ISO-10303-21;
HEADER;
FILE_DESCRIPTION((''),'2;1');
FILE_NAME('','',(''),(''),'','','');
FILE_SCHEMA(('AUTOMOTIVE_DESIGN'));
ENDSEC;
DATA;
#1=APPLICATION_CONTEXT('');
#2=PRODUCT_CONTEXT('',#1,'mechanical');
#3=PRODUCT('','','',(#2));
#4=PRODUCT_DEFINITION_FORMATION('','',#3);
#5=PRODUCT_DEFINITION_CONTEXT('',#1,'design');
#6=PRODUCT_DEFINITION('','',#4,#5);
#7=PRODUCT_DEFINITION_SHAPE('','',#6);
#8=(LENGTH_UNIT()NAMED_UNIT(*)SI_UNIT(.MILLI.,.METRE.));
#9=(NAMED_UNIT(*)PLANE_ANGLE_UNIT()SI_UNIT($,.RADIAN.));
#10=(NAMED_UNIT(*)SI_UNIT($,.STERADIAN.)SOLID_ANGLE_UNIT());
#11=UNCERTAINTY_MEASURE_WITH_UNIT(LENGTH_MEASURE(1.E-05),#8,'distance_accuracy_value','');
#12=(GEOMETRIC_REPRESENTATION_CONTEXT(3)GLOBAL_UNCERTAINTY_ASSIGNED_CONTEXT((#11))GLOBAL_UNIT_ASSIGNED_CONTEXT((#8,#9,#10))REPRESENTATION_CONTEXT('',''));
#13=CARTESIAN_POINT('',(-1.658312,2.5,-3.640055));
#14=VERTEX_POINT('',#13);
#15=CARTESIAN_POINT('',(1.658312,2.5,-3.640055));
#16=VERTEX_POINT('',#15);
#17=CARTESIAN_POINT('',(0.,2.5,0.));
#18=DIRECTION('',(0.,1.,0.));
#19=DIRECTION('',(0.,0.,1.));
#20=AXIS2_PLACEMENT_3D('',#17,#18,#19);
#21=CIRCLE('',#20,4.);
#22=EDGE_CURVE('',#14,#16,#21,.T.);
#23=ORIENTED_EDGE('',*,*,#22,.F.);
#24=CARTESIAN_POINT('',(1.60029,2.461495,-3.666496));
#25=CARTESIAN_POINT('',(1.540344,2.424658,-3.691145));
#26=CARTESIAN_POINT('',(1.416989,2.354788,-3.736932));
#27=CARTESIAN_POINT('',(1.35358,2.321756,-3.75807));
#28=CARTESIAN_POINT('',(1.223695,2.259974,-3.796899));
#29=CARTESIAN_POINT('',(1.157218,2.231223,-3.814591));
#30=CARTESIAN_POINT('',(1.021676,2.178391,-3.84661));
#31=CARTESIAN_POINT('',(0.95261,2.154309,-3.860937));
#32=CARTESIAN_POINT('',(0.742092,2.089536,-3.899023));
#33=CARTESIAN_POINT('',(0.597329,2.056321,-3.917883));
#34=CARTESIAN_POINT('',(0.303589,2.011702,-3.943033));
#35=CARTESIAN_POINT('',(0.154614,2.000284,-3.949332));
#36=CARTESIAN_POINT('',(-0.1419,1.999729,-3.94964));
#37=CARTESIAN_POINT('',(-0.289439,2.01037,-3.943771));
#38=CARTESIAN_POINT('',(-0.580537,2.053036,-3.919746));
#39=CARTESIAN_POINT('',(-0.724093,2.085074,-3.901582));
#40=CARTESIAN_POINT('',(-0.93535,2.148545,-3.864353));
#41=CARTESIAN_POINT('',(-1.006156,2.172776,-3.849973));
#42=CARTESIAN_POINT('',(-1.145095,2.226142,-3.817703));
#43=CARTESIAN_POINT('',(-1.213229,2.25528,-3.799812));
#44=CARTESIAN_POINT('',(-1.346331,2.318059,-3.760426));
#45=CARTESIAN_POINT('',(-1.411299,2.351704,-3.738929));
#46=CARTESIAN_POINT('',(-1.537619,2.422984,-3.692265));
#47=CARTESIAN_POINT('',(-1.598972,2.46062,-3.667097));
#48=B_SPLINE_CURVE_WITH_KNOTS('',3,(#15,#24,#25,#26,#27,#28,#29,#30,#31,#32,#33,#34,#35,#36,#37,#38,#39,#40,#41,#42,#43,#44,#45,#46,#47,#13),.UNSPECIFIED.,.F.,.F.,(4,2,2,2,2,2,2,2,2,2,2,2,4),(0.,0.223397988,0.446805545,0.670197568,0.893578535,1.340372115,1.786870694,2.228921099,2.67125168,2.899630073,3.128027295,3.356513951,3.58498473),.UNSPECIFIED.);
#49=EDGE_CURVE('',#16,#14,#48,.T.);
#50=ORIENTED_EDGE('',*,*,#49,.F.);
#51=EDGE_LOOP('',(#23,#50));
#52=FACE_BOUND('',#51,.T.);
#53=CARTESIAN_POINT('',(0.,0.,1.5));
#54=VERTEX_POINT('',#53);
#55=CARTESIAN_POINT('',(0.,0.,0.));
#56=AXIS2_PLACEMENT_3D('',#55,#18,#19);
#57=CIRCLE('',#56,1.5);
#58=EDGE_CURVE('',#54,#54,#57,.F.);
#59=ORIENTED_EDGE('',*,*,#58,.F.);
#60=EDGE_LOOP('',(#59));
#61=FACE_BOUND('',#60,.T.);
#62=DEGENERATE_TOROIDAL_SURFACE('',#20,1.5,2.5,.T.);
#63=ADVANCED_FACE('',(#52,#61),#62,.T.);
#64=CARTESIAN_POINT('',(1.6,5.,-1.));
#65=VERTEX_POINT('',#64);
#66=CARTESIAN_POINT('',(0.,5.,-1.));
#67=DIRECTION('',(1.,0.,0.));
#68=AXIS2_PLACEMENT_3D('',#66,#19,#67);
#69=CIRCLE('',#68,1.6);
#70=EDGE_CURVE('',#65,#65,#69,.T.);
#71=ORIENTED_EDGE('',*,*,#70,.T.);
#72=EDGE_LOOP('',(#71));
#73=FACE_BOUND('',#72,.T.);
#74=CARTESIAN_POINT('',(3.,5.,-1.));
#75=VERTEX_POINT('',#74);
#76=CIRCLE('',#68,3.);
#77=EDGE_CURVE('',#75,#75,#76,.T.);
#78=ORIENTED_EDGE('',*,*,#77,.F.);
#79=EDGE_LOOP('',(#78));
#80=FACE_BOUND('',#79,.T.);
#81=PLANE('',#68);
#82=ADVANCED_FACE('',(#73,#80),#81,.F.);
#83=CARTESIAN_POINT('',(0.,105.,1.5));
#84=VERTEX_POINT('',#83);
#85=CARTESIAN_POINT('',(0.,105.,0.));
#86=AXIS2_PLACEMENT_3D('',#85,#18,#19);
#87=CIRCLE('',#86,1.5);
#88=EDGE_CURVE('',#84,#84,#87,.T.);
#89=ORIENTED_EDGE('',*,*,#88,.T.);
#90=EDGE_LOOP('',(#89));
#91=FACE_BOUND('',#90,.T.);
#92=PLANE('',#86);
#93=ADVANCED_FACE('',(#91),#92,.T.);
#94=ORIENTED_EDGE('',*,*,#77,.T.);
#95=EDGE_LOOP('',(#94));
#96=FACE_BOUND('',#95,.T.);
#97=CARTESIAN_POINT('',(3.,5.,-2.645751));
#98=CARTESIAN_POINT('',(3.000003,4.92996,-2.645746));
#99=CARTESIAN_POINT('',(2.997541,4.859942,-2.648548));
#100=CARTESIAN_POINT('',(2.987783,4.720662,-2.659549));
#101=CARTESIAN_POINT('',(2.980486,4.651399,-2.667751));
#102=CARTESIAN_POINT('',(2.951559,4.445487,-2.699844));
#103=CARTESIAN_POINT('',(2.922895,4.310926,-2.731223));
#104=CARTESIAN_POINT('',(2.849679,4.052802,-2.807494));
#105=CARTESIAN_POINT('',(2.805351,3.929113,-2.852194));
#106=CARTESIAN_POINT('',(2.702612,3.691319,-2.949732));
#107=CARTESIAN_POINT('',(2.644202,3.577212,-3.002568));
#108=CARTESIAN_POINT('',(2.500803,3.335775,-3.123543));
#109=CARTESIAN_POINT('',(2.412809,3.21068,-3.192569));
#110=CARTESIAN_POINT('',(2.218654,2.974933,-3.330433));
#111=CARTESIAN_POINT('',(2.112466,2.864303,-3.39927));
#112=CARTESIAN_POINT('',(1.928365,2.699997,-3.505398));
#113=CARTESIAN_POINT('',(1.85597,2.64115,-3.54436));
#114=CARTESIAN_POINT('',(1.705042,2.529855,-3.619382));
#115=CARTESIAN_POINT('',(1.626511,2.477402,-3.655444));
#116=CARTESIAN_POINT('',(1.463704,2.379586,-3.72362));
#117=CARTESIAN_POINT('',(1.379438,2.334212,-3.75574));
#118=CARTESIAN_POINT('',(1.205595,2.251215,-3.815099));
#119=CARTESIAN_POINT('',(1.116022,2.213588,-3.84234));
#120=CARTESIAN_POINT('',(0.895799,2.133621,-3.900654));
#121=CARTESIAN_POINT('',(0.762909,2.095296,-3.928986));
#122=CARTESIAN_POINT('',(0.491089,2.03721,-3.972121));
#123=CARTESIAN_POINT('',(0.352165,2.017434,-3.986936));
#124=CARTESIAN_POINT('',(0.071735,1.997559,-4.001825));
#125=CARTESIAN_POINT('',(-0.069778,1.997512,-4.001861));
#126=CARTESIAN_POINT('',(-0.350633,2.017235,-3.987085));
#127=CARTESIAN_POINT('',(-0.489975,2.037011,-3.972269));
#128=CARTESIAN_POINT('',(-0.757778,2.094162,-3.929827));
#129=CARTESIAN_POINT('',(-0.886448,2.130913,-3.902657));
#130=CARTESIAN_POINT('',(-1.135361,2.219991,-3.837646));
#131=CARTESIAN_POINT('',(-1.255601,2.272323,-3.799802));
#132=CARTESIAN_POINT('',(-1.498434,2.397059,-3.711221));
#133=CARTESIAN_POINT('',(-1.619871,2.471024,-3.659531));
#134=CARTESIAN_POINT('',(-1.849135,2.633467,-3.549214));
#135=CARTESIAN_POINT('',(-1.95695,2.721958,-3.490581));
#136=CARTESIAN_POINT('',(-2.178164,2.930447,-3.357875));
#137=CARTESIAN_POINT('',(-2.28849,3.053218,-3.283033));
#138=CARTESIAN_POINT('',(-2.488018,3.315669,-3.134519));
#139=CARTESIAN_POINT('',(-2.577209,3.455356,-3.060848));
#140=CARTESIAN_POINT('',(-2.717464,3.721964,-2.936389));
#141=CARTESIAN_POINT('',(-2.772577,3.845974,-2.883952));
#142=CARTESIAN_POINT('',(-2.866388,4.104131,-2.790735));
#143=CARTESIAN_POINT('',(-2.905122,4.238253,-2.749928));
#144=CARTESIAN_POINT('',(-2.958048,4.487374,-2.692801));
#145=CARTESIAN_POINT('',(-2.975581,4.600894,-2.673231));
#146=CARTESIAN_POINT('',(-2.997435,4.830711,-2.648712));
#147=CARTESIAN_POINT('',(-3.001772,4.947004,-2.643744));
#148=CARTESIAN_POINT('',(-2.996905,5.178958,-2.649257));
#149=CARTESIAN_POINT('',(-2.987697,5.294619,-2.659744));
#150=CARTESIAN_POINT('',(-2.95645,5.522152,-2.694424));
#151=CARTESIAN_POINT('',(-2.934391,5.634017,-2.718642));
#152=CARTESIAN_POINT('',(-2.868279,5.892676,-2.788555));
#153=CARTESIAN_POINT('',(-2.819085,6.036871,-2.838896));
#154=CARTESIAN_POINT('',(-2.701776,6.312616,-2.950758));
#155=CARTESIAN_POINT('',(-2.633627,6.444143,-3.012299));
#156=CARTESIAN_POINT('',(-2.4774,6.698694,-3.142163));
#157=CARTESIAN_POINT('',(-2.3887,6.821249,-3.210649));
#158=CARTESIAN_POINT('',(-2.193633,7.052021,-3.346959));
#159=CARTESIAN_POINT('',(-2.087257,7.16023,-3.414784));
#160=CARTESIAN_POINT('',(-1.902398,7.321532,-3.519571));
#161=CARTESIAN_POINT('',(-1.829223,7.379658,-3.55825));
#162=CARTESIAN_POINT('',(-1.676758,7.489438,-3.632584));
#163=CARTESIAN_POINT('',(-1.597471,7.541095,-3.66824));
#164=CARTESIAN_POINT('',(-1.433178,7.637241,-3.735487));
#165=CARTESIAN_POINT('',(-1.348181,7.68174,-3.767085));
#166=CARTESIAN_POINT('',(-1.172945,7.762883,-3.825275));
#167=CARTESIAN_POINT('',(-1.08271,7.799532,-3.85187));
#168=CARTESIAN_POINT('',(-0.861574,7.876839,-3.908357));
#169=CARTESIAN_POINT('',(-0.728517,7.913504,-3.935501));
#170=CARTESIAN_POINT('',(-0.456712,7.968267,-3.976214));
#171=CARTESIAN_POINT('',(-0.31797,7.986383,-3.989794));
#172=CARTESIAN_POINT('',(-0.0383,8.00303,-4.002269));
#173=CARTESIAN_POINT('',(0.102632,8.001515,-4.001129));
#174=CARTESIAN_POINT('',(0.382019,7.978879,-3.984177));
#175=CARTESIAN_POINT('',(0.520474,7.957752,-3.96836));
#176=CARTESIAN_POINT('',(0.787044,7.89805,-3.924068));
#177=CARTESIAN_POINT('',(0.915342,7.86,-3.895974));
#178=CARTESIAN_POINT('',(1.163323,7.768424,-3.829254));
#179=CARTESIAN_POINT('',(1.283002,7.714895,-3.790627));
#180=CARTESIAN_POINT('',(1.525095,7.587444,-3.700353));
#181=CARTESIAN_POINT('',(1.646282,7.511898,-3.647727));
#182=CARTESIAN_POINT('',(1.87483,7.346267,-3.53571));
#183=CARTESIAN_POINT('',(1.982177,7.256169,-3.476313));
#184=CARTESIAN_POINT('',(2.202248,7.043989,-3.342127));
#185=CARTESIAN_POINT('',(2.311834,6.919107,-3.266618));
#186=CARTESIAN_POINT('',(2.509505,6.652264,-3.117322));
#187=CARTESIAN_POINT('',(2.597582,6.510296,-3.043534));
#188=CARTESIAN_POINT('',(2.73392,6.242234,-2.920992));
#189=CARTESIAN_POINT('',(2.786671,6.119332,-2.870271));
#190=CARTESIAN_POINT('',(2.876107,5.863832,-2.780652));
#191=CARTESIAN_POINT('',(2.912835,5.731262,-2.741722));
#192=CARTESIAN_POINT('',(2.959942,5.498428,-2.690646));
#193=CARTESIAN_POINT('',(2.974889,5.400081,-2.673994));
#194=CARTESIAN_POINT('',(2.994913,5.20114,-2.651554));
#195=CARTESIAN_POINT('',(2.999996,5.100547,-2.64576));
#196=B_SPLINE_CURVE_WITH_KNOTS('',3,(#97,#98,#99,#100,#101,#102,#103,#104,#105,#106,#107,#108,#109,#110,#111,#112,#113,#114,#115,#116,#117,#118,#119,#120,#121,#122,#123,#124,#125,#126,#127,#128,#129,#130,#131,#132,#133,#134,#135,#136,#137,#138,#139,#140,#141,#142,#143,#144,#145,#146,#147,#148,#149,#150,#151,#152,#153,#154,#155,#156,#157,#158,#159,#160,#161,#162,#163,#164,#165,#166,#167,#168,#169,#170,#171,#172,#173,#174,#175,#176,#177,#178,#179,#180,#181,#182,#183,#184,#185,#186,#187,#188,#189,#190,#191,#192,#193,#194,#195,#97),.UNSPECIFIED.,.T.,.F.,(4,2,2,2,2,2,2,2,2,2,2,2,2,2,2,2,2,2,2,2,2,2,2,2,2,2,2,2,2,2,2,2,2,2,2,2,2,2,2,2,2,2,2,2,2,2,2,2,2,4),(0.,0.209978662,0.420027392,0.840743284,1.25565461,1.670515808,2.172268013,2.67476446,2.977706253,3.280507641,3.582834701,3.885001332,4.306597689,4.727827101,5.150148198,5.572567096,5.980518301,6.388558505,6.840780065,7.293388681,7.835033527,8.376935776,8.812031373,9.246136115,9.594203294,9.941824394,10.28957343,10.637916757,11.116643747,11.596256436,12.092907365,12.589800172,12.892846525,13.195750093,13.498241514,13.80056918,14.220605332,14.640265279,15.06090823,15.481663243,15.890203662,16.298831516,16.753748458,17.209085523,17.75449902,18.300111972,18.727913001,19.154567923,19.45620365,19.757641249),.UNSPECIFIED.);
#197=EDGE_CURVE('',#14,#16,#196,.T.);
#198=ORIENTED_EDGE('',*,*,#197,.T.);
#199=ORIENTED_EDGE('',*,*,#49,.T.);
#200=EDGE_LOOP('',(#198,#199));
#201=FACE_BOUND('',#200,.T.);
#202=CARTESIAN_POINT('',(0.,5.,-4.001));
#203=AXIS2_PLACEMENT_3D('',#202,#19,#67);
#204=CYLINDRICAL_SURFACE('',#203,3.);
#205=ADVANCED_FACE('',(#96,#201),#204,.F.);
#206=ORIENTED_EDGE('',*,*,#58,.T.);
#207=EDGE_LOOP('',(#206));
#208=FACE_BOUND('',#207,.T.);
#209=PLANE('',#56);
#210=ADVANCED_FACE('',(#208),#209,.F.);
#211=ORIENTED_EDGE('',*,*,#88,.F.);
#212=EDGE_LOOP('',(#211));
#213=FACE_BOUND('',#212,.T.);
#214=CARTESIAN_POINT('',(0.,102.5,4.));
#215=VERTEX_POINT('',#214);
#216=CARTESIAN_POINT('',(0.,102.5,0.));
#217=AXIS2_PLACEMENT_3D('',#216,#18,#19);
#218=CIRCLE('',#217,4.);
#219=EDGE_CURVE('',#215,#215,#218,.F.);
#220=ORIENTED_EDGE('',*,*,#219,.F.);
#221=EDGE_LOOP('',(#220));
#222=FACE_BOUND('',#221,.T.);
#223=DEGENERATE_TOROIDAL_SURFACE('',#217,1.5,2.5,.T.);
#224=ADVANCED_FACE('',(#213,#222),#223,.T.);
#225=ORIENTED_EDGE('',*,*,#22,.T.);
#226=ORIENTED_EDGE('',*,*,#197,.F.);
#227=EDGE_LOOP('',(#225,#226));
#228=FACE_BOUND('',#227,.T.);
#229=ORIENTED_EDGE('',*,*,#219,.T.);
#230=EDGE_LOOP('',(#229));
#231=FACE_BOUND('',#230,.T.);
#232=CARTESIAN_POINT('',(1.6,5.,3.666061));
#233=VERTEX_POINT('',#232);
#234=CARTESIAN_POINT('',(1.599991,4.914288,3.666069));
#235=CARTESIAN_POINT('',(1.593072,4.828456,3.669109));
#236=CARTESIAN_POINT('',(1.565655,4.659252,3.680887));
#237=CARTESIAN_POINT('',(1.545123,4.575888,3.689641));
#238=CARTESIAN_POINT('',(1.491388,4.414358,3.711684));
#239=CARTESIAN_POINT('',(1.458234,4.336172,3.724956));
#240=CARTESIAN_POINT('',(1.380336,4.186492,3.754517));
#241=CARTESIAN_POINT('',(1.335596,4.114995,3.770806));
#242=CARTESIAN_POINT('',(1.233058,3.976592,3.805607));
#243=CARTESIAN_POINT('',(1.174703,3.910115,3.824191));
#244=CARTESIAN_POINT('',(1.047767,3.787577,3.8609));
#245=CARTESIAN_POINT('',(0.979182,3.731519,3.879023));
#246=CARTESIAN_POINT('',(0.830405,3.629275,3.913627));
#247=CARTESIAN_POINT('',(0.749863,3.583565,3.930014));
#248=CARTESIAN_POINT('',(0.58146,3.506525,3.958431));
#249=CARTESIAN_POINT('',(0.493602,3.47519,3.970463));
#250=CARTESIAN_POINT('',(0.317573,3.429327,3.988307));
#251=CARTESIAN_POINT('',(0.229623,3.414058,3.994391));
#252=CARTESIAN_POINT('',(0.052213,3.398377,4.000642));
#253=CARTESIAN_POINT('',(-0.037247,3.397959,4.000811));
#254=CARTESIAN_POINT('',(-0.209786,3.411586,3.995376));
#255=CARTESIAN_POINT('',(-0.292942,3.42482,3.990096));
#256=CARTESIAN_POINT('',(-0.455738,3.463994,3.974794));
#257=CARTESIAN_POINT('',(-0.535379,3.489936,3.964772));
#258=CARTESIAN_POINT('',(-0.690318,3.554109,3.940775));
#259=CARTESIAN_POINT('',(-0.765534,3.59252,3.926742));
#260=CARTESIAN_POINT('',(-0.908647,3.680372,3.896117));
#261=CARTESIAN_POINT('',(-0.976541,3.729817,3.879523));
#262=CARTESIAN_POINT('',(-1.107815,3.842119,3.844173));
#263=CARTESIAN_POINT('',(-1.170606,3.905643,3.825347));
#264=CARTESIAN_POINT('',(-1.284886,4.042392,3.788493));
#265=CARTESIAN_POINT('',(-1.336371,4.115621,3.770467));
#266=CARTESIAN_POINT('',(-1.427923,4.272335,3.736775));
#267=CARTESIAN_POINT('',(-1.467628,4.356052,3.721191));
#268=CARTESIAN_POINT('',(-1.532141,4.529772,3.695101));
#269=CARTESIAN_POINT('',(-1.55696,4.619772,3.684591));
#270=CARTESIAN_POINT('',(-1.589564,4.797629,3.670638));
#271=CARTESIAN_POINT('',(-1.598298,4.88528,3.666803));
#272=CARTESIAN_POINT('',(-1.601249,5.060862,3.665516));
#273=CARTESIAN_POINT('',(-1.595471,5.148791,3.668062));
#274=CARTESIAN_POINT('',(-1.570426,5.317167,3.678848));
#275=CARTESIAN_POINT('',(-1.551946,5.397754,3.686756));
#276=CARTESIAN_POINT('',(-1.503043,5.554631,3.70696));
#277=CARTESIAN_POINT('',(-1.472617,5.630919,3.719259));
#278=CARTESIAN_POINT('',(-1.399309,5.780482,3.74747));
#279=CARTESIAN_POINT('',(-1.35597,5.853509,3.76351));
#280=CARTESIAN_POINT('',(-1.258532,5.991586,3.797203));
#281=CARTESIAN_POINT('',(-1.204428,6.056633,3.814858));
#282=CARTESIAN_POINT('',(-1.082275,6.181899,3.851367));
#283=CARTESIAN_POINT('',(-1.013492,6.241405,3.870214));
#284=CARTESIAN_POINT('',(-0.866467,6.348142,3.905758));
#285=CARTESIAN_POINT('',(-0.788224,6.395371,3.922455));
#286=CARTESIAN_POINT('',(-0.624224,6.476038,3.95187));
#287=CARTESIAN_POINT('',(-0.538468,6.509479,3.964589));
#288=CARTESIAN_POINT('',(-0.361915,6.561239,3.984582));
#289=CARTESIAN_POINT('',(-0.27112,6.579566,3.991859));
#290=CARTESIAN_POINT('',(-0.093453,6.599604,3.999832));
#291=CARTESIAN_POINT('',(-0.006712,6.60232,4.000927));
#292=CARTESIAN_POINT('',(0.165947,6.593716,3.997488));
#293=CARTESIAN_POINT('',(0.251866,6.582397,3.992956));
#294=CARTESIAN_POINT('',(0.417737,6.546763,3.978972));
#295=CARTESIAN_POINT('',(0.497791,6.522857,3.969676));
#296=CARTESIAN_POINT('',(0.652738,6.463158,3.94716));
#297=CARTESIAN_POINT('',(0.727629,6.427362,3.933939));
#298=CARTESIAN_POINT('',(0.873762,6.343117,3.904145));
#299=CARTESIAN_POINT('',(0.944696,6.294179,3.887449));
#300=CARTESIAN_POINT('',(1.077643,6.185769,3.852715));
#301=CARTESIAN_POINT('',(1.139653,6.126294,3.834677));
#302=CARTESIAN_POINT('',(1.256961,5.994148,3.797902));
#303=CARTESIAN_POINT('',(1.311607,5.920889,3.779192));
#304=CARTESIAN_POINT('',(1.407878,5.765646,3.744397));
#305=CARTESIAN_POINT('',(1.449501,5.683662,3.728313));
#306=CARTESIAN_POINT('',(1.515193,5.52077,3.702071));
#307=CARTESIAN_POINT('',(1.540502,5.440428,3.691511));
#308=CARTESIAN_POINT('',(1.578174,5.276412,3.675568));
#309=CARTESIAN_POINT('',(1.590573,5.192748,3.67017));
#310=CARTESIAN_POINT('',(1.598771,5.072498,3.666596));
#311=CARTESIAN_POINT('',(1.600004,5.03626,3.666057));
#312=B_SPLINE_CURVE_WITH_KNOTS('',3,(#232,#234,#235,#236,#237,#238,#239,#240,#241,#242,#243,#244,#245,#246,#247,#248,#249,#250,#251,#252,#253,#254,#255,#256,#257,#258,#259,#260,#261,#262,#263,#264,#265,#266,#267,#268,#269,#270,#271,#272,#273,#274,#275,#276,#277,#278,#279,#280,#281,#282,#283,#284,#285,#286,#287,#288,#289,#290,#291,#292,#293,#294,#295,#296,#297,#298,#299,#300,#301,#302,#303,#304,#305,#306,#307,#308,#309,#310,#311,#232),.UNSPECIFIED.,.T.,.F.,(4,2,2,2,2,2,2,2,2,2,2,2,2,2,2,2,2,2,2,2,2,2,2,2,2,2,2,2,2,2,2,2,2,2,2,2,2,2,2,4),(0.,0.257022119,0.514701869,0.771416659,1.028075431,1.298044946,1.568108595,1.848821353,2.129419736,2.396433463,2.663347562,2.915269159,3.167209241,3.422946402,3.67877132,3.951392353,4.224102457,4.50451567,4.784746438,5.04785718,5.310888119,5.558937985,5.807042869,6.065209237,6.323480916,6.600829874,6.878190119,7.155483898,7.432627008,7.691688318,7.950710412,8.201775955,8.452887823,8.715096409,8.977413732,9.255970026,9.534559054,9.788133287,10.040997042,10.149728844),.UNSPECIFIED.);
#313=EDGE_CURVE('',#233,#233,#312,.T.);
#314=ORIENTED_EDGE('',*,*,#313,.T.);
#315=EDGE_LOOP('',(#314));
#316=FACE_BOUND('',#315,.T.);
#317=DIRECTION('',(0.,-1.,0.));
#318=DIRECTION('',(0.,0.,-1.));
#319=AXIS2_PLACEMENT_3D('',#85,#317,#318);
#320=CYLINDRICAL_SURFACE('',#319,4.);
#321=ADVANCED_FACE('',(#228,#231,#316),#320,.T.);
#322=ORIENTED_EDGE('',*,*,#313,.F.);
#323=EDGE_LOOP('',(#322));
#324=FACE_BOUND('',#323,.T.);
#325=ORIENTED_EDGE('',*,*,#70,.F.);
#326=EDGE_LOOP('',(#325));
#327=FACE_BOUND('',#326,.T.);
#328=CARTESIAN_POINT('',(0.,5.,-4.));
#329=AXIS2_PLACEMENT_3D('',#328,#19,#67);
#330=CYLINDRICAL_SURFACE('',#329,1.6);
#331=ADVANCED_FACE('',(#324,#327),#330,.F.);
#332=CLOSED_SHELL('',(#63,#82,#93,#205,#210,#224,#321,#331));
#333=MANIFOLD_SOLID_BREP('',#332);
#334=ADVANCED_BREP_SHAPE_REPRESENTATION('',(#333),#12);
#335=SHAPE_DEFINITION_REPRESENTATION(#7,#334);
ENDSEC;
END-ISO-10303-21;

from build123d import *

# Parameters (mm, degrees)
SKETCH1_R               = 4
BOSS_EXTRUDE1_DEPTH     = 105
CUT_EXTRUDE1_DEPTH      = 106.152270541
CUT_EXTRUDE1_DEPTH_BACK = 106.152270541
SKETCH2_R               = 1.6
CUT_EXTRUDE2_REACH      = 108.152
CUT_EXTRUDE2_END_RADIUS = 4
CUT_EXTRUDE2_START      = -1
SKETCH3_R               = 3
FILLET1_R               = 2.5


with BuildPart() as part:
    # Sketch1 → Boss-Extrude1 (new body)
    with BuildSketch(Plane(origin=(0, 0, 0), x_dir=(1, 0, 0), z_dir=(0, 1, 0))):
        with Locations(Location((0, 0, 0), (0, 0, 270))):
            Circle(SKETCH1_R)
    extrude(amount=BOSS_EXTRUDE1_DEPTH)

    # Sketch2 → Cut-Extrude1 (cut, two sides: drawn at the far end of the back side and taken through both)
    with BuildSketch(Plane.XY.offset(-CUT_EXTRUDE1_DEPTH_BACK)):
        with Locations(Location((0, 5, 0), (0, 0, 89.999999999))):
            Circle(SKETCH2_R)
    extrude(amount=CUT_EXTRUDE1_DEPTH + CUT_EXTRUDE1_DEPTH_BACK, mode=Mode.SUBTRACT)

    # Cut-Extrude2: up to this cylinder (the profile starts inside it)
    cut_extrude2_end = Plane(origin=(0, 5, 0), z_dir=(0, -1, 0)) * Cylinder(CUT_EXTRUDE2_END_RADIUS, 225.304, mode=Mode.PRIVATE)
    # Sketch3 → Cut-Extrude2 (cut, up to the surface)
    with BuildSketch(Plane.XY.offset(CUT_EXTRUDE2_START), mode=Mode.PRIVATE) as cut_extrude2_sk1:
        with Locations((0, 5)):
            Circle(SKETCH3_R)
    cut_extrude2_tool1 = extrude(cut_extrude2_sk1.sketch, amount=-CUT_EXTRUDE2_REACH, mode=Mode.PRIVATE) & cut_extrude2_end
    add(cut_extrude2_tool1.solids().sort_by_distance((0, 5, -1))[0], mode=Mode.SUBTRACT)

    # Fillet1
    # the kernel refuses this fillet: 2.5 mm, written as the material it takes off along each edge
    with BuildSketch(Plane(origin=(0, 0, 0), x_dir=(0, 0, 1), z_dir=(-1, 0, 0))) as fillet1_piece_1:
        with BuildLine():
            CenterArc((4 - FILLET1_R, FILLET1_R), FILLET1_R, 270, 90)
            Line((4 - FILLET1_R, 0), (4, 0))
            Line((4, 0), (4, FILLET1_R))
        make_face()
    revolve(axis=Axis((0, 0, 0), (0, 1, 0)), mode=Mode.SUBTRACT)
    with BuildSketch(Plane(origin=(0, 105, 0), x_dir=(0, 0, 1), z_dir=(-1, 0, 0))) as fillet1_piece_2:
        with BuildLine():
            CenterArc((4 - FILLET1_R, -FILLET1_R), FILLET1_R, 0, 90)
            Line((4 - FILLET1_R, 0), (4, 0))
            Line((4, 0), (4, -FILLET1_R))
        make_face()
    revolve(axis=Axis((0, 105, 0), (0, 1, 0)), mode=Mode.SUBTRACT)


solid = part.part
